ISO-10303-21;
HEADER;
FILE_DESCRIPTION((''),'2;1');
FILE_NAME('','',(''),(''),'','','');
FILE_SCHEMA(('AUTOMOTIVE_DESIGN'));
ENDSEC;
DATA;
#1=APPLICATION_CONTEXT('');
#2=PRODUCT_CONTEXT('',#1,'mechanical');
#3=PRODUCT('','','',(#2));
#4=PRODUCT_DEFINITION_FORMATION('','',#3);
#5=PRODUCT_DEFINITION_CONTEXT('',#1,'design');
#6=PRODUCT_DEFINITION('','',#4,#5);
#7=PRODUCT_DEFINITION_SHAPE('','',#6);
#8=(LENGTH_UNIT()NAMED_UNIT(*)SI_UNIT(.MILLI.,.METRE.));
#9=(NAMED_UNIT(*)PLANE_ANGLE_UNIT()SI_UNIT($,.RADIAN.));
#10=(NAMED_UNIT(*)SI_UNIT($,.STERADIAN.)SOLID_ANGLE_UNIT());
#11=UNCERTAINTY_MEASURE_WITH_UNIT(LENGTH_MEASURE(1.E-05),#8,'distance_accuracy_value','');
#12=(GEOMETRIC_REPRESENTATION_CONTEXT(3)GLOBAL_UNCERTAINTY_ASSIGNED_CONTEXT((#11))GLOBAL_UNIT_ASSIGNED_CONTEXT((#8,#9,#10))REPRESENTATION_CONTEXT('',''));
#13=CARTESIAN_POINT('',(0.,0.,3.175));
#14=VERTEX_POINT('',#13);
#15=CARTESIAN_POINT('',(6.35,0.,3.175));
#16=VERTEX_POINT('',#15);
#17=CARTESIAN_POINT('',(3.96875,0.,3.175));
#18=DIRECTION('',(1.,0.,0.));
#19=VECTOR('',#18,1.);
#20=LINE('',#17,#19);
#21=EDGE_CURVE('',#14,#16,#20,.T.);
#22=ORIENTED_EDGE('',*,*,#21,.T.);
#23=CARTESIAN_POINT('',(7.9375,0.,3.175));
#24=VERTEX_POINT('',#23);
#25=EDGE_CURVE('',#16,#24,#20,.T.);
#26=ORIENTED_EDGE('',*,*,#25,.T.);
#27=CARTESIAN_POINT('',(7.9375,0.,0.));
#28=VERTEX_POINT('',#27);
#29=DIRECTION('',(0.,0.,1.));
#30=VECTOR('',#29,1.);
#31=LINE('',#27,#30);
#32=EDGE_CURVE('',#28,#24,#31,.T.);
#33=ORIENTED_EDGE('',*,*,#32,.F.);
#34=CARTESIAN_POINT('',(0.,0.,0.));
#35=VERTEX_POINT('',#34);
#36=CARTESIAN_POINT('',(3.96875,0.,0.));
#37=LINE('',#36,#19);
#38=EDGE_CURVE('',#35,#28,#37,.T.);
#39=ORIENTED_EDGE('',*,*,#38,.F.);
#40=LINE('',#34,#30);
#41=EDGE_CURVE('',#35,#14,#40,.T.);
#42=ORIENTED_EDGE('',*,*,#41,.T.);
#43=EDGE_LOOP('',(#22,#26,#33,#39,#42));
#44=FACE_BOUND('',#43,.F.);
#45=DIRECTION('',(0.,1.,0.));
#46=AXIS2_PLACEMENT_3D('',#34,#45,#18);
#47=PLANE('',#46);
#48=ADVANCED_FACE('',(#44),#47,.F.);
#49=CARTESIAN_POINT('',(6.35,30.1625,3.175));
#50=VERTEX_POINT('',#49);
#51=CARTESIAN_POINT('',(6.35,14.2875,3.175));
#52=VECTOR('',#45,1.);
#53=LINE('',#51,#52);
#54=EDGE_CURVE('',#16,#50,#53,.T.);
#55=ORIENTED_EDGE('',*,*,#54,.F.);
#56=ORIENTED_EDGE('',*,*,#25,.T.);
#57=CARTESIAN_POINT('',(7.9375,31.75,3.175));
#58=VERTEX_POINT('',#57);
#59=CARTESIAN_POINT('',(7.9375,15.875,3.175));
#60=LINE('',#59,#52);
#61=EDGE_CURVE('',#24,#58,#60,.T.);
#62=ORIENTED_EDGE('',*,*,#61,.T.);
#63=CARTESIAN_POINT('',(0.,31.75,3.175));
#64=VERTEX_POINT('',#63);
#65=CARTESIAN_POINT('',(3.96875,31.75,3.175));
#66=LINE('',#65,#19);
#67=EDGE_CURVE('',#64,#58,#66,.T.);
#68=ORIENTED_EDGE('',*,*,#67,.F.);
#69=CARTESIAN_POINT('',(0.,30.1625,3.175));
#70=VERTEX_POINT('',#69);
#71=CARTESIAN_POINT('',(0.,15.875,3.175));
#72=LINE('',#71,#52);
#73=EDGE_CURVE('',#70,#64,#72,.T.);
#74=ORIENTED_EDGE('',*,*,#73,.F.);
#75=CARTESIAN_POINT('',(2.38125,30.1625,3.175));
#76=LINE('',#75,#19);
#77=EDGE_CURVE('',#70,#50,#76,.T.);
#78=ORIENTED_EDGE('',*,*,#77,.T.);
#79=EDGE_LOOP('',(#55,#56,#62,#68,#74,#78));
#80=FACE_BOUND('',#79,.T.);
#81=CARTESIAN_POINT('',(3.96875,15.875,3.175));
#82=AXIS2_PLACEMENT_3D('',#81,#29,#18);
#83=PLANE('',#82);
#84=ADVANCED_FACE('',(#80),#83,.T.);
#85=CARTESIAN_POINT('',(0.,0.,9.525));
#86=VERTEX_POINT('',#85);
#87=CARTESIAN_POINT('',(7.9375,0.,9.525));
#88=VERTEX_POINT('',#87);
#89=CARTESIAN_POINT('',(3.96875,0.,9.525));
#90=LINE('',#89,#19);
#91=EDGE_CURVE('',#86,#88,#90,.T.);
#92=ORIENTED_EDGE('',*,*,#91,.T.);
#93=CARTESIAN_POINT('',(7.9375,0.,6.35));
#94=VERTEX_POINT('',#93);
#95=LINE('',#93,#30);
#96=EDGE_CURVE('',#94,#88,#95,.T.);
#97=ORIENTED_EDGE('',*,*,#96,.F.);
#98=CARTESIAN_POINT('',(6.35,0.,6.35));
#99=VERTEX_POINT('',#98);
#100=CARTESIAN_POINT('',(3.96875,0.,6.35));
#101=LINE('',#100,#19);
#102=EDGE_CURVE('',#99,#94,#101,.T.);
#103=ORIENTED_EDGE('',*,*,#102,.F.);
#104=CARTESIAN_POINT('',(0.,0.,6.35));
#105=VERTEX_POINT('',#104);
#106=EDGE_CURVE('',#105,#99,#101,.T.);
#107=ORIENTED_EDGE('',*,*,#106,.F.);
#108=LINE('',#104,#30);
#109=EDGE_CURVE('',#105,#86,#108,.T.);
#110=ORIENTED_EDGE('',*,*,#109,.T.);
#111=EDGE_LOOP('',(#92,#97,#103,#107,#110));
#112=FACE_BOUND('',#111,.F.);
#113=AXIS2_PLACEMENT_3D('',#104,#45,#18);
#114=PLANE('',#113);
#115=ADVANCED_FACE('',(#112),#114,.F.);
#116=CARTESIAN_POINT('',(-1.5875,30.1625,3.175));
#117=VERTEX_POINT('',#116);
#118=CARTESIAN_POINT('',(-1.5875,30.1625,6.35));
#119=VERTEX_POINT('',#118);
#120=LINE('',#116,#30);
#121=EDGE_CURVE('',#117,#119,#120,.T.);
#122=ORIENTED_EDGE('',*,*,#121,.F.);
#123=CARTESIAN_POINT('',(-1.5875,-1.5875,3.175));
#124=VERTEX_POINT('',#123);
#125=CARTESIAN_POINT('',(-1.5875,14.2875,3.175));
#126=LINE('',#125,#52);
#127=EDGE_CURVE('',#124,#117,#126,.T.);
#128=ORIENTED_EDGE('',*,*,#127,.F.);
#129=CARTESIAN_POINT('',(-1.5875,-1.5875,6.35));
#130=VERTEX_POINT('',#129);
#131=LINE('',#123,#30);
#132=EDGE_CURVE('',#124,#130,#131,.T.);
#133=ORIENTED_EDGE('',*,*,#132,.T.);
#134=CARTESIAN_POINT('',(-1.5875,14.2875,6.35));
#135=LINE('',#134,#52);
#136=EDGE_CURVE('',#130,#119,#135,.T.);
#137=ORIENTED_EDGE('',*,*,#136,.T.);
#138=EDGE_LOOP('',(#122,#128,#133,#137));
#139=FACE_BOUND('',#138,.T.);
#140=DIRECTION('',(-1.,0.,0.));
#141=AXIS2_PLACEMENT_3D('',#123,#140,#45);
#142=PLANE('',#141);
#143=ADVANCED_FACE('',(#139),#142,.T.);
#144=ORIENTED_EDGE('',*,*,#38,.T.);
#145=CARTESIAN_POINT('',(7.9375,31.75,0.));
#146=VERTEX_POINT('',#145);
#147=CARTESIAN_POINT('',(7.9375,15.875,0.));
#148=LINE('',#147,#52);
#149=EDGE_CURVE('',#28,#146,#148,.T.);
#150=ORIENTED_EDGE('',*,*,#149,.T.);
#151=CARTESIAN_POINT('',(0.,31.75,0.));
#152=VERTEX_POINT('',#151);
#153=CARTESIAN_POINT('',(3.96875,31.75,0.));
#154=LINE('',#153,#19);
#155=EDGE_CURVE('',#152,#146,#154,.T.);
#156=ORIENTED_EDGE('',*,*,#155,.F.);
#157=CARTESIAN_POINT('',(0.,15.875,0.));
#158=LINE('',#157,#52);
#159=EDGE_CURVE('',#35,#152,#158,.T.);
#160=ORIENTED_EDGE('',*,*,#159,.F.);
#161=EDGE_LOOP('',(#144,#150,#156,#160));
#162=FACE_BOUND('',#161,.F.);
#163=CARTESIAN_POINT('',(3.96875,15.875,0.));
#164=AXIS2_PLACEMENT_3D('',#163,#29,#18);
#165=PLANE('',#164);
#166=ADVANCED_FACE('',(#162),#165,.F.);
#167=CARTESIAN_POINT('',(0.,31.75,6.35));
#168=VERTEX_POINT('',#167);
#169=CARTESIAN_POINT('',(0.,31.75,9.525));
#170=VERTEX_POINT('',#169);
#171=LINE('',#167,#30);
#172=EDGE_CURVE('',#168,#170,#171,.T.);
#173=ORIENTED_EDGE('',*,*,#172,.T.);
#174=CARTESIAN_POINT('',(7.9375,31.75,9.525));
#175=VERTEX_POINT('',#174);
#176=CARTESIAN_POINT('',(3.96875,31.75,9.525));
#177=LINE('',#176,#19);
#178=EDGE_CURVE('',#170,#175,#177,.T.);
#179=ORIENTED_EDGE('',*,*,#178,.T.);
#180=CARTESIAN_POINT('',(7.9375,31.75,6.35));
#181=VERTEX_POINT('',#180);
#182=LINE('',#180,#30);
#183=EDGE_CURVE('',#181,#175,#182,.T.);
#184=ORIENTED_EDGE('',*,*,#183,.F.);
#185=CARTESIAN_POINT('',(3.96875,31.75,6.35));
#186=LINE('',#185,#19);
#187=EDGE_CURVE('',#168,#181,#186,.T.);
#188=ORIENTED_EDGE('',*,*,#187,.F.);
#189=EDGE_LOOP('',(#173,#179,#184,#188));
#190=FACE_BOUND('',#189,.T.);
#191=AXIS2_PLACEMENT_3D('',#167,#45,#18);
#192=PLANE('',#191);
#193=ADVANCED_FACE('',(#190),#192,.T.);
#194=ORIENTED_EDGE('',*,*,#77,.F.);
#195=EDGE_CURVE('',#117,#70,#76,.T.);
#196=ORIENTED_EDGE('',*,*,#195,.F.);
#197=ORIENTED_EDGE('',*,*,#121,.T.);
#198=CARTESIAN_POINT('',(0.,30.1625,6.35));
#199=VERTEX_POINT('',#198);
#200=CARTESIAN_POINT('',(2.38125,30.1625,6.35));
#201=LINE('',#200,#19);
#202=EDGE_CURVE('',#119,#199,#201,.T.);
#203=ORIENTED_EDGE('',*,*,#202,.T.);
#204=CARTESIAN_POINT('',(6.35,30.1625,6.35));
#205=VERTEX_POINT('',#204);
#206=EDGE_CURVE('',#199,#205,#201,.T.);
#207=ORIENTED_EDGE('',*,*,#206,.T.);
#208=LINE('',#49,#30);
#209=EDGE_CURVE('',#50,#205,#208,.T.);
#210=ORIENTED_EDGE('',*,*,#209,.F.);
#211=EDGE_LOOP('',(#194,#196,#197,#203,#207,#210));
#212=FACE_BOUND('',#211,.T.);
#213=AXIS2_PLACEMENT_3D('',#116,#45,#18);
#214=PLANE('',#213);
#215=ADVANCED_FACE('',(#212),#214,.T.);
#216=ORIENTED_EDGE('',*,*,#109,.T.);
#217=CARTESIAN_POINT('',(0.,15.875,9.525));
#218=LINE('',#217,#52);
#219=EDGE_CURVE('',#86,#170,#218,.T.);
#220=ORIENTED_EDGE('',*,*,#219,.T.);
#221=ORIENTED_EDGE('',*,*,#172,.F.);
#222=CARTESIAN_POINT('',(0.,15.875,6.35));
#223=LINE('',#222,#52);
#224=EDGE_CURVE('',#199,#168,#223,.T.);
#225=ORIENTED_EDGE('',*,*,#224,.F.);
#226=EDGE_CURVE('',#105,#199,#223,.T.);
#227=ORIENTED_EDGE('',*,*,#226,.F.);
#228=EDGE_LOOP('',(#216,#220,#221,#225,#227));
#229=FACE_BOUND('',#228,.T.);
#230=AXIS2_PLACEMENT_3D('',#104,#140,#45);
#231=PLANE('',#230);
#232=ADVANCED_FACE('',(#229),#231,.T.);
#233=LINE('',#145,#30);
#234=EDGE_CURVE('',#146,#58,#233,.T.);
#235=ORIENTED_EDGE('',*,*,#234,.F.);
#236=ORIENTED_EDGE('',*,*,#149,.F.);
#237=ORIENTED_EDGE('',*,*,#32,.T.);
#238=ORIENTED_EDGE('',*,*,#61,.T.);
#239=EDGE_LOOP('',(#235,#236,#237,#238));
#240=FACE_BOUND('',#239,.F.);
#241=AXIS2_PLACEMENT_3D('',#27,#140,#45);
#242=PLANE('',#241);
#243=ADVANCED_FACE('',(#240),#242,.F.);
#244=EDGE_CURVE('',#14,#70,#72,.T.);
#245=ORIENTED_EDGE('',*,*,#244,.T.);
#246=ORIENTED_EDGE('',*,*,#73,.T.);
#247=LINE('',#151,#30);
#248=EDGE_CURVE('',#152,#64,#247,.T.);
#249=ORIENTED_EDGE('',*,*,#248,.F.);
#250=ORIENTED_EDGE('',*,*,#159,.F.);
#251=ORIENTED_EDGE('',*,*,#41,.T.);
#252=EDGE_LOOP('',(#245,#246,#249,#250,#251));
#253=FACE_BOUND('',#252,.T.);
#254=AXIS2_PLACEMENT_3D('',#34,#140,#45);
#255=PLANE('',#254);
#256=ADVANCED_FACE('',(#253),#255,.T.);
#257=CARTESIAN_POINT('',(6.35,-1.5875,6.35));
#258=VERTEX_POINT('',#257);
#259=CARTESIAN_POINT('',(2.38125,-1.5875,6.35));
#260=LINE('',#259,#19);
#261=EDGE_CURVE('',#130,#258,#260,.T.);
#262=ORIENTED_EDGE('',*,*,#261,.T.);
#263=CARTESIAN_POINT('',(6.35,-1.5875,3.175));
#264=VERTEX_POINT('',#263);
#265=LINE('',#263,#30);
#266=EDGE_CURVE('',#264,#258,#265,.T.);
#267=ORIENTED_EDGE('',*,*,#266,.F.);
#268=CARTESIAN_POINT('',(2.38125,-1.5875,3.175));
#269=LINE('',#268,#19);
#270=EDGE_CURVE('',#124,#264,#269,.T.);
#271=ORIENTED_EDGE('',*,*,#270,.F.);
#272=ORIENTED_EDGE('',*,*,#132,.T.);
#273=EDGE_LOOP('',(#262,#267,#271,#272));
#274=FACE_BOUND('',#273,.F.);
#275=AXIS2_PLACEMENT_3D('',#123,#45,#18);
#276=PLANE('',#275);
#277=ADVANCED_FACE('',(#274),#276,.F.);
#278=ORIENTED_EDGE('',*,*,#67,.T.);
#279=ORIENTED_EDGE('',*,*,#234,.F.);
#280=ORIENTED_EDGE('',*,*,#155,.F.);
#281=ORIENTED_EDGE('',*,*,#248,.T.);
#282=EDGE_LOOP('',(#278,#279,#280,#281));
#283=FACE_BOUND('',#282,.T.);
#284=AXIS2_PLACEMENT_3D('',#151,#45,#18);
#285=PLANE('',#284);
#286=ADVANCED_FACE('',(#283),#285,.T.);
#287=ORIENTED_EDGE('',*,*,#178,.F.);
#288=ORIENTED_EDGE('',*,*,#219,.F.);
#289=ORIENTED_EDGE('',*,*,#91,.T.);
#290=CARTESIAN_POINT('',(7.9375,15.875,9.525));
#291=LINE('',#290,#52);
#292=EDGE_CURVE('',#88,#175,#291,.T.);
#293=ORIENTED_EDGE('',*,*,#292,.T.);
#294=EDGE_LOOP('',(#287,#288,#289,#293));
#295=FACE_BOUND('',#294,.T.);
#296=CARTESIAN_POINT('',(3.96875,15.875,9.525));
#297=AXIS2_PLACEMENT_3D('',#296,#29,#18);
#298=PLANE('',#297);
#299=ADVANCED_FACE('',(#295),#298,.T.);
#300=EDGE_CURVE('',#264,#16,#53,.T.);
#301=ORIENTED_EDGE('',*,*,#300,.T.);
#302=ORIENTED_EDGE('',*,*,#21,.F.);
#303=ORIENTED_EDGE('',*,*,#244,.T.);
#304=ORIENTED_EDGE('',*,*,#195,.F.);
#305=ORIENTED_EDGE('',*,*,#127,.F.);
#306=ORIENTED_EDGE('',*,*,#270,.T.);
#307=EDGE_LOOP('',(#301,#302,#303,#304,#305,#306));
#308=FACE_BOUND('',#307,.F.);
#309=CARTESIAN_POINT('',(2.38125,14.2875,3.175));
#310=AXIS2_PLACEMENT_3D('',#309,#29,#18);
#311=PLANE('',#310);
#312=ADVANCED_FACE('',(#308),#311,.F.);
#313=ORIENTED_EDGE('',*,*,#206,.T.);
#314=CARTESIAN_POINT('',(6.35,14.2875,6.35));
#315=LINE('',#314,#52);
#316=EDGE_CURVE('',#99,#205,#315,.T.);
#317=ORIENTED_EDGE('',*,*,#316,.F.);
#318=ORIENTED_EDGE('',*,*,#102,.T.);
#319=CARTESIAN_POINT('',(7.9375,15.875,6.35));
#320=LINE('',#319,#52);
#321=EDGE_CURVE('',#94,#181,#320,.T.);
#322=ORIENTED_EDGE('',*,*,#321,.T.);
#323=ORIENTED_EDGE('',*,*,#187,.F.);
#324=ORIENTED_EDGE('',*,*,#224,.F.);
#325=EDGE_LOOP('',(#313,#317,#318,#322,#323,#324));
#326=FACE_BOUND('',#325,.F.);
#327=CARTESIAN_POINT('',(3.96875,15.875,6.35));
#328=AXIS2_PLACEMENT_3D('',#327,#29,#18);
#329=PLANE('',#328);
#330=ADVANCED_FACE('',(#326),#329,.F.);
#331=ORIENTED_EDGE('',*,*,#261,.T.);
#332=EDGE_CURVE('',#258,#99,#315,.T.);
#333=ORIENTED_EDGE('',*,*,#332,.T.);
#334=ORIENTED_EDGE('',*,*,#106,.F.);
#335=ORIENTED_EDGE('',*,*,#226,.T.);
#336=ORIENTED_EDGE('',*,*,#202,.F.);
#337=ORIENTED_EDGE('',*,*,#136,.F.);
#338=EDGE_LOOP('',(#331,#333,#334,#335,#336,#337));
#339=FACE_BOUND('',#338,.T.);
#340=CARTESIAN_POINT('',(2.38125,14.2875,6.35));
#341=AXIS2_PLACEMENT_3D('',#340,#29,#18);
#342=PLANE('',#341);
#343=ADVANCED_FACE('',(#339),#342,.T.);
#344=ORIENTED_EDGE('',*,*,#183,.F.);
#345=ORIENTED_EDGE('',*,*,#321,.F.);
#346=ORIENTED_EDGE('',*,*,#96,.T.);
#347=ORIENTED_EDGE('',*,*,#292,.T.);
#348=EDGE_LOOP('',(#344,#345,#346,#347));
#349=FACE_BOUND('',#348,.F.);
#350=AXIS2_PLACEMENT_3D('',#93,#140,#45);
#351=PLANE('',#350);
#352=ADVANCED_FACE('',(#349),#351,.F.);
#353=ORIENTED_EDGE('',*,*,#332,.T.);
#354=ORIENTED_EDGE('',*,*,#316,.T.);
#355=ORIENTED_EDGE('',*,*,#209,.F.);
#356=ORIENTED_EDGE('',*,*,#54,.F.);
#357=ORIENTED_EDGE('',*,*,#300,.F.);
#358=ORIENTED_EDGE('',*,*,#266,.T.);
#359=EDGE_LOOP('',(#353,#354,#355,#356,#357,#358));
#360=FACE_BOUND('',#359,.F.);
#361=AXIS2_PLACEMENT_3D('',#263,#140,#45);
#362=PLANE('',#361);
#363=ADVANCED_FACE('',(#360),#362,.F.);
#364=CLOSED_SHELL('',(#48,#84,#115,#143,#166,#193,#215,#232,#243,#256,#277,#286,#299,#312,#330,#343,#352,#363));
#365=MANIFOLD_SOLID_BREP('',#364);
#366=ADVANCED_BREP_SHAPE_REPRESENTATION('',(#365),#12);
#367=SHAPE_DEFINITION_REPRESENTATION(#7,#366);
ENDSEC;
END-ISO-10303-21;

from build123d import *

# Parameters (mm, degrees)
F2_W     = 7.9375
F2_H     = 31.75
F3_DEPTH = 3.175
F4_W     = 7.9375
F4_H     = 31.75
F5_DEPTH = 3.175
F6_W     = 7.9375
F6_H     = 31.75
F7_DEPTH = 3.175


# Not quite as in the source:
# - a variable given as a bare number and used for a length is read in inches; the dataset says mm whatever the document's units were


with BuildPart() as f3:
    # F2 (on Top) → F3 (new body)
    with BuildSketch(Plane.XY):
        with Locations((3.96875, 15.875)):
            Rectangle(F2_W, F2_H)
    extrude(amount=F3_DEPTH)

    # F4 (on face) → F5 (join)
    with BuildSketch(Plane.XY.offset(3.175)):
        with Locations((2.38125, 14.2875)):
            Rectangle(F4_W, F4_H)
    extrude(amount=F5_DEPTH)

    # F6 (on face) → F7 (join)
    with BuildSketch(Plane.XY.offset(6.35)):
        with Locations((3.96875, 15.875)):
            Rectangle(F6_W, F6_H)
    extrude(amount=F7_DEPTH)


solid = f3.part
